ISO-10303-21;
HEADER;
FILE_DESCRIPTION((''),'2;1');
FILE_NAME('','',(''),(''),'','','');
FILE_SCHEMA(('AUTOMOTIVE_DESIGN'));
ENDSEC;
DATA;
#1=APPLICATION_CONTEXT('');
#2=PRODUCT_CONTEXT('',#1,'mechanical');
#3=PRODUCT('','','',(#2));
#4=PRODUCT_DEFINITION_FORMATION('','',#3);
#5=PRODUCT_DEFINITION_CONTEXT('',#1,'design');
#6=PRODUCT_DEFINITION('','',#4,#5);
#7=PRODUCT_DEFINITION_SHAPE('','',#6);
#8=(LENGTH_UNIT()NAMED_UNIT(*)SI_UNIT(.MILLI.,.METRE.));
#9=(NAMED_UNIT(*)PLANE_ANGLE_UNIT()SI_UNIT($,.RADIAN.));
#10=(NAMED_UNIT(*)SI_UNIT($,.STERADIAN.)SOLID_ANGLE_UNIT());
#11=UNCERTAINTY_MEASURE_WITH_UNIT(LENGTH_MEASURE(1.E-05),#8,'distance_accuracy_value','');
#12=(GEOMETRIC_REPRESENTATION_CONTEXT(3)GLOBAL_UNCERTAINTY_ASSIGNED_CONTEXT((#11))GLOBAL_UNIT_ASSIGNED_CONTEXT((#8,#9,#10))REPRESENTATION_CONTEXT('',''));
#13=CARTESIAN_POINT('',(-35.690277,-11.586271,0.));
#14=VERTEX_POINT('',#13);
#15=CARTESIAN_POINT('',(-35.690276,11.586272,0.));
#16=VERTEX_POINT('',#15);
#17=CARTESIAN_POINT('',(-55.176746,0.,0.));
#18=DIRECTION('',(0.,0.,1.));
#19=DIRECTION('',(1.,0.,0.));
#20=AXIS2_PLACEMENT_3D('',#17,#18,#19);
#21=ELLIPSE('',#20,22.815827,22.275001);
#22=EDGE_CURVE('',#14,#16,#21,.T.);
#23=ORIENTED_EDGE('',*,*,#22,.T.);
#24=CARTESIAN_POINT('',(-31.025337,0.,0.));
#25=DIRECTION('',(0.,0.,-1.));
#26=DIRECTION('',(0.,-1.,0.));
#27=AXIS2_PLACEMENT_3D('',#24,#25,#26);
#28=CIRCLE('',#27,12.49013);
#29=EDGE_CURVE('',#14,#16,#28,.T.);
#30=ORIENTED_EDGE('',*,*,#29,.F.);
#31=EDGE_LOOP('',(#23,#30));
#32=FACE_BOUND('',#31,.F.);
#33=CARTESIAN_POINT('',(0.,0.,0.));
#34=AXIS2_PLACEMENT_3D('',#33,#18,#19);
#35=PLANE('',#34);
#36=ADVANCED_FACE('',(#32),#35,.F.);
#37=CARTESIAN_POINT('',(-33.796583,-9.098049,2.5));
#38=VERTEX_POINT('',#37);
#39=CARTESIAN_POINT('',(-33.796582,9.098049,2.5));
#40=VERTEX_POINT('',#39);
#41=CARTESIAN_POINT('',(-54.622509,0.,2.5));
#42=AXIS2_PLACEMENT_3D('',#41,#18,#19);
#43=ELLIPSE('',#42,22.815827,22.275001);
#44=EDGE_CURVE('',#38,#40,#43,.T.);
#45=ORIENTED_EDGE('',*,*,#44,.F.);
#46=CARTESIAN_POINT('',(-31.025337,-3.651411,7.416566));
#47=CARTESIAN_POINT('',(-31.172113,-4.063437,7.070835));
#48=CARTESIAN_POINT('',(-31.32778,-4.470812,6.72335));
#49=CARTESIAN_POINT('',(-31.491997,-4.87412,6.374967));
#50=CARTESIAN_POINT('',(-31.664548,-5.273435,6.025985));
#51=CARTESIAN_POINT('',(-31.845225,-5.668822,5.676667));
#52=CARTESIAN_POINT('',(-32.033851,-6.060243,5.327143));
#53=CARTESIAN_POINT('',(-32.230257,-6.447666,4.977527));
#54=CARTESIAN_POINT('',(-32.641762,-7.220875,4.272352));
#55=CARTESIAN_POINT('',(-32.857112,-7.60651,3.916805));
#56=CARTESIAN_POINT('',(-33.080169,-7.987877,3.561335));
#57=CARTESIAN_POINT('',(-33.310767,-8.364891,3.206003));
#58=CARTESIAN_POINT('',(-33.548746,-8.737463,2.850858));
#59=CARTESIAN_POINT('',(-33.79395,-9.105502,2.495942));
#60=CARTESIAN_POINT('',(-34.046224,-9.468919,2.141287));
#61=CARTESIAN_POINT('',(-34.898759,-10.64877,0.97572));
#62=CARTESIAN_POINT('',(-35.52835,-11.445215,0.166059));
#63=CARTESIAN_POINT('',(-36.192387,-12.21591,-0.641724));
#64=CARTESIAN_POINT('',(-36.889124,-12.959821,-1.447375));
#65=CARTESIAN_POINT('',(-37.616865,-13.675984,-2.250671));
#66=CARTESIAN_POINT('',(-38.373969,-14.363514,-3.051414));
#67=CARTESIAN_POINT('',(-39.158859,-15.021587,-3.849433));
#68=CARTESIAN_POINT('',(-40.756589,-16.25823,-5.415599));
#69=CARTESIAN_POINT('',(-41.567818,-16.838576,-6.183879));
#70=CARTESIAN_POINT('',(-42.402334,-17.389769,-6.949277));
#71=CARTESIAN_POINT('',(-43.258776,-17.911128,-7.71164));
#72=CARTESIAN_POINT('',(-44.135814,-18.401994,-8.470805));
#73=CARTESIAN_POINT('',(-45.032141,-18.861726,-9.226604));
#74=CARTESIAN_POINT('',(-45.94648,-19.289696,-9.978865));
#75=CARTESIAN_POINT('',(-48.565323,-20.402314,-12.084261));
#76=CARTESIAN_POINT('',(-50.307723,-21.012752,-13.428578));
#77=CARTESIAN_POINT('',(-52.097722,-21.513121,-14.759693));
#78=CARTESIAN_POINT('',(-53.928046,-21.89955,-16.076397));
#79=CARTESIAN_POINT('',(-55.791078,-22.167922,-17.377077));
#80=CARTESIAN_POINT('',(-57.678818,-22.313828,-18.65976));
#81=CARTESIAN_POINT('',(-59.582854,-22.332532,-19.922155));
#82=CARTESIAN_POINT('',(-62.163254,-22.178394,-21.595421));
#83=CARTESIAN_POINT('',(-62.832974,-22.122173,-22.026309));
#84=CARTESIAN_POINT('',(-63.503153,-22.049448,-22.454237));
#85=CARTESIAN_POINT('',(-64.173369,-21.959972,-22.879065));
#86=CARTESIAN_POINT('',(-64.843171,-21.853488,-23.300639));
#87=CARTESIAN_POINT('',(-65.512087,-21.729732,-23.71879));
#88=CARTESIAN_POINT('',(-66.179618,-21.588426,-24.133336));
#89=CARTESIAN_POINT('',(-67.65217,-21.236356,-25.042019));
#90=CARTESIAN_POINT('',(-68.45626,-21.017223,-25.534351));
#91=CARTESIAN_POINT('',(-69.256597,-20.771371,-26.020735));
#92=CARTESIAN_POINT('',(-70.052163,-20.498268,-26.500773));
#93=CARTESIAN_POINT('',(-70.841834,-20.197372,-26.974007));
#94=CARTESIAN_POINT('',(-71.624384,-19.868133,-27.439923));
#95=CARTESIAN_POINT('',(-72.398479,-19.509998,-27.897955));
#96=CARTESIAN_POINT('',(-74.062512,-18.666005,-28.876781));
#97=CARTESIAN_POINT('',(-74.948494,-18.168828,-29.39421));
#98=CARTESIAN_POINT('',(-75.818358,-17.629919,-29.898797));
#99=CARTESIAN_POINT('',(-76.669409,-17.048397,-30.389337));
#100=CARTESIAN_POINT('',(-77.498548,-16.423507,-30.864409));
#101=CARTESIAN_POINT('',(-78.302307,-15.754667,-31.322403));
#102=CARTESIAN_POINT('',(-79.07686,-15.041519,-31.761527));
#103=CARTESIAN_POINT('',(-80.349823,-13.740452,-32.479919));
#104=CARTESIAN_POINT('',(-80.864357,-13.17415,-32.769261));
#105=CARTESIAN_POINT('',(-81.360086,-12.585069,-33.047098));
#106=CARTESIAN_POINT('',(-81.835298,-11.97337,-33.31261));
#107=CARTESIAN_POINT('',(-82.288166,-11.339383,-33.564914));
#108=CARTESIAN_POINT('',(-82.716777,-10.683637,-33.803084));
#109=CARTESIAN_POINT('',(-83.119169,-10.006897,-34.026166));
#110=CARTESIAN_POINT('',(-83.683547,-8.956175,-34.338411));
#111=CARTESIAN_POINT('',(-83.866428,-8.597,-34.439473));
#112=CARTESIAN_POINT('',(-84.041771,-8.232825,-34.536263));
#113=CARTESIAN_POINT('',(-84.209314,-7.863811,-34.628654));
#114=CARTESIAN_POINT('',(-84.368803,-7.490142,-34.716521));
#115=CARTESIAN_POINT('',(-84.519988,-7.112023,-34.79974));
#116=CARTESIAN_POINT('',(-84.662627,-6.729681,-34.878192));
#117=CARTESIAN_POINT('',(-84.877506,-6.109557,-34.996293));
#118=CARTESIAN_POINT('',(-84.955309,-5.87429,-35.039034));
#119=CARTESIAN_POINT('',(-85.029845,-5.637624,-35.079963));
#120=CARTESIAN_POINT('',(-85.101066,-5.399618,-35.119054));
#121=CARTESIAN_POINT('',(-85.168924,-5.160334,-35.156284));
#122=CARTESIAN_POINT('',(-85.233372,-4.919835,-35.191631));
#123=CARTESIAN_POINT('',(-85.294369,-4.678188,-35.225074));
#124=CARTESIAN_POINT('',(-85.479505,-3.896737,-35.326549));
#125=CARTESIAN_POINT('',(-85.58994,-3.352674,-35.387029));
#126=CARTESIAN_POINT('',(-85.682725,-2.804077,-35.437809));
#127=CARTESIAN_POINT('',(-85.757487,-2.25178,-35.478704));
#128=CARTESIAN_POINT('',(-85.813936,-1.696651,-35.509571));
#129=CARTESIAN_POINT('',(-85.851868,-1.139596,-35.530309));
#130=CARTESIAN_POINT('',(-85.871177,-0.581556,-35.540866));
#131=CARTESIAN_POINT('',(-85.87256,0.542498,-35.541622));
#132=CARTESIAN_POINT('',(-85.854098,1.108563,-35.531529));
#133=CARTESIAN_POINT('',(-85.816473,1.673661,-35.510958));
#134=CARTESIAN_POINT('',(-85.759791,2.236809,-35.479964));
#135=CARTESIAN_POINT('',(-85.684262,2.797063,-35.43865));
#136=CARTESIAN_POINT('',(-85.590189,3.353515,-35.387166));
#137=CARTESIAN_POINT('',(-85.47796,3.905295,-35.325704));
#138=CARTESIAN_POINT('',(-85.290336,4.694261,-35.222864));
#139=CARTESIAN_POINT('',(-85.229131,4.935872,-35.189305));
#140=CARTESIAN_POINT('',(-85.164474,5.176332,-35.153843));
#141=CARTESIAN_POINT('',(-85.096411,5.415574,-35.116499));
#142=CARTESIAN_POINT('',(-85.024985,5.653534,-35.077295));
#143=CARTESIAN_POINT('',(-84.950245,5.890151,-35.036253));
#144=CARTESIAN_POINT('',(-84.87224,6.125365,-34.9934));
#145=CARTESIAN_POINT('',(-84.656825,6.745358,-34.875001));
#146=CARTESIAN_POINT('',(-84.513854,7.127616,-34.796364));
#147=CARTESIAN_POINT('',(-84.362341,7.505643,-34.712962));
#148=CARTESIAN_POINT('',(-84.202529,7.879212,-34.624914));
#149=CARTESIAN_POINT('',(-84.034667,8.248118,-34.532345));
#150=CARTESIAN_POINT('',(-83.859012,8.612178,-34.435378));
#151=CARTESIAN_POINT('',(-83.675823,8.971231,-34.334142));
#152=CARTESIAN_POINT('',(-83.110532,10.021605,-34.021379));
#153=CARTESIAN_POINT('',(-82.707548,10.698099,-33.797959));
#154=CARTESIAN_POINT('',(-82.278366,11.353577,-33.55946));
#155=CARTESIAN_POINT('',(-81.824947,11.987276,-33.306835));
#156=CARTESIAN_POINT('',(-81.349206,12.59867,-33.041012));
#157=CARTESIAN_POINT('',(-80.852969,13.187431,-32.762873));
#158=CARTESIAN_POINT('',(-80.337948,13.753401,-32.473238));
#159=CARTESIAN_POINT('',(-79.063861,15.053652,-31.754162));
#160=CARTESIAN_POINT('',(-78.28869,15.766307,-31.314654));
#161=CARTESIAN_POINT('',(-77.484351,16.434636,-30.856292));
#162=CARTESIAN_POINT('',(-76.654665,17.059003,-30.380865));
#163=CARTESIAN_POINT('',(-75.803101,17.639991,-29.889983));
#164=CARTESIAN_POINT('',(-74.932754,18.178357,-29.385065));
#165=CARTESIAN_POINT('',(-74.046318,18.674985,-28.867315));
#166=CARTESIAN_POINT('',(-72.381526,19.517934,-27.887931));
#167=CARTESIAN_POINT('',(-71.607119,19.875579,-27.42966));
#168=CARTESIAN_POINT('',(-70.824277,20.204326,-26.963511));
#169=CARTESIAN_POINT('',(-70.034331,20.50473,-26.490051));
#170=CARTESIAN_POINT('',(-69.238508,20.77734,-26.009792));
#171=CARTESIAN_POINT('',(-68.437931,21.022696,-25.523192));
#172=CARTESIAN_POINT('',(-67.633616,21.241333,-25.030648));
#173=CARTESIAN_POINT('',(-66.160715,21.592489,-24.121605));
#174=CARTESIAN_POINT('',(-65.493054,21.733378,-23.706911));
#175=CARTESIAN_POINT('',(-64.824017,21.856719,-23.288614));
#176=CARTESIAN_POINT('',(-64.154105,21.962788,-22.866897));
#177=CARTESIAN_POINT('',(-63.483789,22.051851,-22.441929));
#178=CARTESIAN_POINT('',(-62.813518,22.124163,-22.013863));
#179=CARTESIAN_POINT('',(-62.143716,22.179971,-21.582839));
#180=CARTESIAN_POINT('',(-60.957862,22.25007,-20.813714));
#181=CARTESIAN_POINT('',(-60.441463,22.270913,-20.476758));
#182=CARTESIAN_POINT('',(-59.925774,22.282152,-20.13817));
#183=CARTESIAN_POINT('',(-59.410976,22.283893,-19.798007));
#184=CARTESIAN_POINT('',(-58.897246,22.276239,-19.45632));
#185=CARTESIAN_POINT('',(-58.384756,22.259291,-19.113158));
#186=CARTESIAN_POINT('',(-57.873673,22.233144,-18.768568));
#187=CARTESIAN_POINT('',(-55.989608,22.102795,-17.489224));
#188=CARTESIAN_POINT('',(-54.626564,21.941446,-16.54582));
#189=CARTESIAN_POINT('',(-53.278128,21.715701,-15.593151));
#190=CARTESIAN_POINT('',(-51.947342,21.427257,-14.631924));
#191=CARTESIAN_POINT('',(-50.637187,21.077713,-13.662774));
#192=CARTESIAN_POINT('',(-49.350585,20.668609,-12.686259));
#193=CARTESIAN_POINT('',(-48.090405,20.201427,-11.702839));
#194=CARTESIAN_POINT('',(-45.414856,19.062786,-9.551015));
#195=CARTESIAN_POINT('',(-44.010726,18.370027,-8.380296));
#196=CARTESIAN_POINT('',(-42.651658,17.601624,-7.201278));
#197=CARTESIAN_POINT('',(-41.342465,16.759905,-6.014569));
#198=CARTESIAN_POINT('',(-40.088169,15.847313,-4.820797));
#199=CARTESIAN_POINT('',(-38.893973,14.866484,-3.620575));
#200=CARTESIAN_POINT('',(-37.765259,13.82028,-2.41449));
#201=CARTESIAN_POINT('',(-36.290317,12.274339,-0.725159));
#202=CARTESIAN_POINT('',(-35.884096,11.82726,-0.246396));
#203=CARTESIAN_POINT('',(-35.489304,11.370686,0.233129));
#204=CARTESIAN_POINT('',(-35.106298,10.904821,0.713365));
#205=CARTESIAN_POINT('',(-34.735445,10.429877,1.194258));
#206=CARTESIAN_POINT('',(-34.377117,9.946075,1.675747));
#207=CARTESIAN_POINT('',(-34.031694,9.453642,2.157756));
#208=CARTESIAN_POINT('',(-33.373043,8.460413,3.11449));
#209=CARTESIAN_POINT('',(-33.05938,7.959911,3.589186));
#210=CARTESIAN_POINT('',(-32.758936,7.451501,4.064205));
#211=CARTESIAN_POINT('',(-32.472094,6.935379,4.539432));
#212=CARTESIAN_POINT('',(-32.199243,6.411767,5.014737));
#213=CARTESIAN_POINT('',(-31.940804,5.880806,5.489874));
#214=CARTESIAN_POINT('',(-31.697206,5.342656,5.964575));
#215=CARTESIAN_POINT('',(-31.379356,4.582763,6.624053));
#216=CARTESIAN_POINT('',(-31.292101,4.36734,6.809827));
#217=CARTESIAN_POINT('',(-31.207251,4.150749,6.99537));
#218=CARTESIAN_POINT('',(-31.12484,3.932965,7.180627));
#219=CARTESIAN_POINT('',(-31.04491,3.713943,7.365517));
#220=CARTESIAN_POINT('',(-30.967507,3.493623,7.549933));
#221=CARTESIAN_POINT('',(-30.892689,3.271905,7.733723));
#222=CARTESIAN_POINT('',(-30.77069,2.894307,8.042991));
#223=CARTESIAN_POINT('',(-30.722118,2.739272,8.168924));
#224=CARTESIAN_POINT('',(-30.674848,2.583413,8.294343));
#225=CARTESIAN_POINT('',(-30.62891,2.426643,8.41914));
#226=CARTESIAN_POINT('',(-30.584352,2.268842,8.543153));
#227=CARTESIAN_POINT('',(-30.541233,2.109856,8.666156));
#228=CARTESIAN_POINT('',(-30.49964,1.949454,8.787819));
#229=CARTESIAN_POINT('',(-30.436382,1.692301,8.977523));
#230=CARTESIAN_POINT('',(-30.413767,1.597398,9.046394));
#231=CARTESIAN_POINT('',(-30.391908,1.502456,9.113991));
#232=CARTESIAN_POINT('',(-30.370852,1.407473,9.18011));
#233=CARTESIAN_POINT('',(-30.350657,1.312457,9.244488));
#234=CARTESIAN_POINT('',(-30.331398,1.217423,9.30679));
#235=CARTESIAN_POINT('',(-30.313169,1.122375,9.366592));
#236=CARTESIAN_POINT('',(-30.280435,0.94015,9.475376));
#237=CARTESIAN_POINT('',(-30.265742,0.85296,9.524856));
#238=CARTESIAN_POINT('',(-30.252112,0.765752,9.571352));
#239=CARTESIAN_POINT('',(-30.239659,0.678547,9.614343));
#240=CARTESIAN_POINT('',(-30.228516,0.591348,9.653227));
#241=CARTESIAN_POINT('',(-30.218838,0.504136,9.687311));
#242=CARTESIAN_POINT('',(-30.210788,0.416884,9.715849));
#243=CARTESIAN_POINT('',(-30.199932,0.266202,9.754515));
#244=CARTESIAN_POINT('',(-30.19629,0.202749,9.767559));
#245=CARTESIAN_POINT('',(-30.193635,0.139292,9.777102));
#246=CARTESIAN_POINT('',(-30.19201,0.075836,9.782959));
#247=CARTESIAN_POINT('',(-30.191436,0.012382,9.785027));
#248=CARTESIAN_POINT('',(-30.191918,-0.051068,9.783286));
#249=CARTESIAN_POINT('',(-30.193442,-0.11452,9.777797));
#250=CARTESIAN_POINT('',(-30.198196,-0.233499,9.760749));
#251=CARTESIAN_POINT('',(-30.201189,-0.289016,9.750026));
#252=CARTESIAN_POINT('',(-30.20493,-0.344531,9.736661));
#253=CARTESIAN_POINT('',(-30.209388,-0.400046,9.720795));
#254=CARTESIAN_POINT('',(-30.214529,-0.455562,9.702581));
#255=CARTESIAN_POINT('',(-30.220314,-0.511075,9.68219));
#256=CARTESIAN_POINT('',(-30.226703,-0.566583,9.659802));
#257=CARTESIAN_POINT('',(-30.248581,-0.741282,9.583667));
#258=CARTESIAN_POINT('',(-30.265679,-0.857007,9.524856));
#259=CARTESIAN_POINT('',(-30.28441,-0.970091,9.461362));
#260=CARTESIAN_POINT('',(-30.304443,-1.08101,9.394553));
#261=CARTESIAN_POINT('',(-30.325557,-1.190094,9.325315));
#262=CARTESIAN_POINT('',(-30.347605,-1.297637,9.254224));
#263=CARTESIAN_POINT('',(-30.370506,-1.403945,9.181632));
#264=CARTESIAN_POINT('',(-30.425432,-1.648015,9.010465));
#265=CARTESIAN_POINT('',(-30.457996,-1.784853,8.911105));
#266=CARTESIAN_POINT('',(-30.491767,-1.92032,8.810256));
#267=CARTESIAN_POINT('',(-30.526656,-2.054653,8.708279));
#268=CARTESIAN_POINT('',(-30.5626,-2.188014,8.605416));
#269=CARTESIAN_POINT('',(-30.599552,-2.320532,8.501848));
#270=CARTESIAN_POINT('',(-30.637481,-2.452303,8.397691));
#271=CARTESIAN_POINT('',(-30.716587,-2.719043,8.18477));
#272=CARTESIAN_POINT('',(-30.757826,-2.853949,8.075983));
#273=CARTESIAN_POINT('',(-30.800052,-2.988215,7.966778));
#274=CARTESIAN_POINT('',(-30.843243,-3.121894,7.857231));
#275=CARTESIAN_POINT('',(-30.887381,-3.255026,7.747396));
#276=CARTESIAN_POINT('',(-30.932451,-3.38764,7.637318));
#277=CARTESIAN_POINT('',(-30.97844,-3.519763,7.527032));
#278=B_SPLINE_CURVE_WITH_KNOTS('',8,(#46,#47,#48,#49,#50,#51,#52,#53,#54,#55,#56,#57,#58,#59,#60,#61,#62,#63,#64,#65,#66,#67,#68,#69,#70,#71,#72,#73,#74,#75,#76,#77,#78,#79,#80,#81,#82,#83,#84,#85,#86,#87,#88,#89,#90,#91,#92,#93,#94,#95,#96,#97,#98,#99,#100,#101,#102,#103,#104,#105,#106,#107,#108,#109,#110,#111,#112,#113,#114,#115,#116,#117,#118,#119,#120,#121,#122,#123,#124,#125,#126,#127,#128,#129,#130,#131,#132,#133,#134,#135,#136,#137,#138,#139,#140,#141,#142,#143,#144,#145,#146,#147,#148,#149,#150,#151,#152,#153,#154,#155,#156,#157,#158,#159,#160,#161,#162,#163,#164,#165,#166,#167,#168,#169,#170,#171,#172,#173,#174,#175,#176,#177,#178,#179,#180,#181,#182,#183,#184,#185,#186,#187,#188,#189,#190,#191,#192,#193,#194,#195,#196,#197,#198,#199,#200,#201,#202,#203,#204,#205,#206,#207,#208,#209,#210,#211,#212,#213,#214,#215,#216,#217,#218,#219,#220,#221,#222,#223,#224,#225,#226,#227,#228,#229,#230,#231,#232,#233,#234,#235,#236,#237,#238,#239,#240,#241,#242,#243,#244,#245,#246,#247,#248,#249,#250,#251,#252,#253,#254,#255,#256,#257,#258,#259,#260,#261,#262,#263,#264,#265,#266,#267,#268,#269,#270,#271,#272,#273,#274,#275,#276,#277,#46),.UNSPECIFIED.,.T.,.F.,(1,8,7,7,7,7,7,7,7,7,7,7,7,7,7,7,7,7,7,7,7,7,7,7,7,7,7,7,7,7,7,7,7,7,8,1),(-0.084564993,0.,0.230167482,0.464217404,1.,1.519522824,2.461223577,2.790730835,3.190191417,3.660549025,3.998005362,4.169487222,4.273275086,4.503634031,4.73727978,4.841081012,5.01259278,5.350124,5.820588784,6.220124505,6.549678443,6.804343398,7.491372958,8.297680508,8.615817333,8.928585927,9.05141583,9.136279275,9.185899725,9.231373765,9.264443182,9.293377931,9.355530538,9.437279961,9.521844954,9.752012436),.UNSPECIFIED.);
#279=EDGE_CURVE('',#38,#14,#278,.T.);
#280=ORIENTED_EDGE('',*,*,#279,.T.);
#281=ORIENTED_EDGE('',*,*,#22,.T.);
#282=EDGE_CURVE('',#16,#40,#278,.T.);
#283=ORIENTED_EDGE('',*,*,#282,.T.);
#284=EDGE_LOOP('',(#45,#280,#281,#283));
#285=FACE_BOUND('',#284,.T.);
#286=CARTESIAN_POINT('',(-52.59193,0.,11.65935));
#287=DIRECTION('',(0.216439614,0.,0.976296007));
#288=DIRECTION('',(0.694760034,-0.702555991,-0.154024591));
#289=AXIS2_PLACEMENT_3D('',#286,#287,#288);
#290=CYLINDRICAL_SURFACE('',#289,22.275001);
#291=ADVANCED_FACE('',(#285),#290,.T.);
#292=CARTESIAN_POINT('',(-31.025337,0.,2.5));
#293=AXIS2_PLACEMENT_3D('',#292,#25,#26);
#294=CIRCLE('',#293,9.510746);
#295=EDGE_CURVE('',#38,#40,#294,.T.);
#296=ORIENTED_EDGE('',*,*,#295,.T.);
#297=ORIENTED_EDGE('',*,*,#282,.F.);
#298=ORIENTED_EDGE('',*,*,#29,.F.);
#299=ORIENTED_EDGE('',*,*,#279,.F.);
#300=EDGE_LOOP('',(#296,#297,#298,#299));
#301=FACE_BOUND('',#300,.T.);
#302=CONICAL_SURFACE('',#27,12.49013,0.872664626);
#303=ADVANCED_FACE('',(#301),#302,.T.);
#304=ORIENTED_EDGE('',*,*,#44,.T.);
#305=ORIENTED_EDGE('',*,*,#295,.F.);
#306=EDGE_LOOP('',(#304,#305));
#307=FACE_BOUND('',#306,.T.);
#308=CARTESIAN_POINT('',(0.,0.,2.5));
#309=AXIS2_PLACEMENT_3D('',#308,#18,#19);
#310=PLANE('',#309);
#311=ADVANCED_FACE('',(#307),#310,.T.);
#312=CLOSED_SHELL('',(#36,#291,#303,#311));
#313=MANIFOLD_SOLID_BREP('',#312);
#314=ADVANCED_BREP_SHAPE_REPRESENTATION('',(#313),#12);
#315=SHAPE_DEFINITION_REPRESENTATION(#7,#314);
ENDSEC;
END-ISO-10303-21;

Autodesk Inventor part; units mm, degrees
ref_plane "YZ Plane" through (0, 0, 0) normal (1, 0, 0) x (0, 1, 0)
sketch "Sketch1" plane through (0, 0, 0) normal (0, 0, 1) x (1, 0, 0)
  spline S0 degree 3 poles (12.775809, 13.743738) (13.453575, 14.296004) (14.16507, 14.792978) (16.937316, 16.441783) (19.224317, 17.243595) (24.595739, 17.979132) (27.723679, 17.596307) (32.869411, 15.535143) (34.964738, 14.129672) (38.628289, 10.359381) (40.089591, 7.896643) (41.435431, 3.545039) (41.703305, 1.772836) (41.703303, -0.000028) (41.7033, -1.772892) (41.435423, -3.545074) (40.089464, -7.897041) (38.627791, -10.360188) (34.965482, -14.128645) (32.872746, -15.532844) (27.722529, -17.597958) (24.586064, -17.980815) (19.219795, -17.240648) (16.945007, -16.443301) (14.175916, -14.800553) (13.458713, -14.300191) (12.775809, -13.743738) knots 0.0475769 0.0475769 0.0475769 0.0475769 0.30841807 0.30841807 1.01543689 1.01543689 1.92782472 1.92782472 2.66674079 2.66674079 3.49744633 3.49744633 4.02653047 4.02653047 4.02653047 4.55561461 4.55561461 5.38644202 5.38644202 6.12460097 6.12460097 7.03935565 7.03935565 7.74266001 7.74266001 8.00547976 8.00547976 8.00547976 8.00547976 weights 1 1 1 1 1 1 1 1 1 1 1 1 1 1 1 1 1 1 1 1 1 1 1 1 1 1 1
  spline S1 degree 3 poles (12.775809, -13.743738) (12.326511, -13.377635) (11.821873, -13.079408) (10.656846, -12.620046) (9.984673, -12.49013) (9.311785, -12.49013) knots 0 0 0 0 0.46270736 0.46270736 1 1 1 1 weights 1 1 1 1 1 1
  line L0 (9.311785, -12.49013) -> (-31.025337, -12.49013)
  spline S2 degree 3 poles (-31.025337, -12.49013) (-32.110865, -12.49013) (-33.198033, -12.347386) (-34.736089, -11.936981) (-35.218379, -11.77627) (-35.690276, -11.586272) knots 0 0 0 0 0.68100487 0.68100487 1 1 1 1 weights 1 1 1 1 1 1
  spline S3 degree 3 poles (9.311785, 12.49013) (9.7991, 12.49013) (10.286231, 12.55778) (11.492025, 12.895964) (12.182584, 13.260359) (12.775809, 13.743738) knots 0 0 0 0 0.38911359 0.38911359 1 1 1 1 weights 1 1 1 1 1 1
  line L1 (0, 0) -> (-42.287334, 0) construction
  line L2 (9.311785, 12.49013) -> (-31.025337, 12.49013)
  arc A0 (-31.025337, 12.49013) -> (-31.025337, -12.49013) centre (-31.025337, 0) ccw
sketch "Sketch1 outline for Extrusion1" plane through (0, 0, 0) normal (0, 0, 1) x (1, 0, 0)
  spline S0 degree 3 poles (12.775809, 13.743738) (13.453575, 14.296004) (14.16507, 14.792978) (16.937316, 16.441783) (19.224317, 17.243595) (24.595739, 17.979132) (27.723679, 17.596307) (32.869411, 15.535143) (34.964738, 14.129672) (38.628289, 10.359381) (40.089591, 7.896643) (41.435431, 3.545039) (41.703305, 1.772836) (41.703303, -0.000028) (41.7033, -1.772892) (41.435423, -3.545074) (40.089464, -7.897041) (38.627791, -10.360188) (34.965482, -14.128645) (32.872746, -15.532844) (27.722529, -17.597958) (24.586064, -17.980815) (19.219795, -17.240648) (16.945007, -16.443301) (14.175916, -14.800553) (13.458713, -14.300191) (12.775809, -13.743738) knots 0 0 0 0 0.03277763 0.03277763 0.12162249 0.12162249 0.23627429 0.23627429 0.3291274 0.3291274 0.4335149 0.4335149 0.50000027 0.50000027 0.50000027 0.56648564 0.56648564 0.67088845 0.67088845 0.76364643 0.76364643 0.87859564 0.87859564 0.96697374 0.96697374 1 1 1 1
  spline S1 degree 3 poles (12.775809, -13.743738) (12.326511, -13.377635) (11.821873, -13.079408) (10.656846, -12.620046) (9.984673, -12.49013) (9.311785, -12.49013) knots 0 0 0 0 0.46270736 0.46270736 1 1 1 1
  line L0 (9.311785, -12.49013) -> (-31.025337, -12.49013)
  arc A0 (-31.025337, -12.49013) -> (-31.025337, 12.49013) centre (-31.025337, 0) cw
  line L1 (-31.025337, 12.49013) -> (9.311785, 12.49013)
  spline S2 degree 3 poles (9.311785, 12.49013) (9.7991, 12.49013) (10.286231, 12.55778) (11.492025, 12.895964) (12.182584, 13.260359) (12.775809, 13.743738) knots 0 0 0 0 0.38911359 0.38911359 1 1 1 1
extrude "Extrusion1" add sketch "Sketch1 outline for Extrusion1" along normal blind 2.5
sketch "Sketch6" plane through (0, 0, 2.5) normal (0, 0, 1) x (1, 0, 0)
  line L0 (-9.525285, -2.542488) -> (-15.356425, -2.542488) construction
  line L1 (-15.356425, -2.542488) -> (-15.356425, 2.542488) construction
  line L2 (-15.356425, 2.542488) -> (-9.525285, 2.542488) construction
  line L3 (-9.525285, 2.542488) -> (-9.525285, -2.542488) construction
  point P0 (0, 0)
  point P1 (-6.22634, 0)
decal "Decal1"
ref_plane "Work Plane1" through (0, 0, 0) normal (0.2164396, 0, 0.976296) x (0, 1, 0)
sketch "Sketch7" plane through (0, 0, 0) normal (0.2164396, 0, 0.976296) x (0, 1, 0)
  point P0 (0, 0)
ref_plane "Work Plane2" through (0, 0, 0) normal (0.2164396, 0, 0.976296) x (0, 1, 0)
sketch "Sketch8" plane through (0, 0, 0) normal (0.2164396, 0, 0.976296) x (0, 1, 0)
  spline S0 degree 3 poles (-12.778059, 35.623375) (-13.1078, 34.920563) (-13.375951, 34.191997) (-13.894146, 32.296016) (-14.054771, 31.101656) (-14.054771, 29.909099) knots -12.94996087 -12.94996087 -12.94996087 -12.94996087 -12.73961425 -12.73961425 -12.41484583 -12.41484583 -12.41484583 -12.41484583 weights 1 1 1 1 1 1
  arc A0 (-15.649435, 38.017312) -> (14.955462, 37.360965) centre (0, 53.868836) ccw
  point P0 (0, 0)
  dimension "d51" = 22.275
surface extrude "ExtrusionSrf1" sketch "Sketch8" against normal blind 38.75 shown no curves A0
split body "Split1" result one side removed by surface "ExtrusionSrf1" removed pieces at (-4.595575, -0.488214, 0.5)
draft "FaceDraft1" angle 50 pull direction (0, 0, 1) faces at (-36.333978, 11.305825, 1.666667) fixed edges at (-43.515467, 0, 0)
properties part number "gornji shiny dio"
